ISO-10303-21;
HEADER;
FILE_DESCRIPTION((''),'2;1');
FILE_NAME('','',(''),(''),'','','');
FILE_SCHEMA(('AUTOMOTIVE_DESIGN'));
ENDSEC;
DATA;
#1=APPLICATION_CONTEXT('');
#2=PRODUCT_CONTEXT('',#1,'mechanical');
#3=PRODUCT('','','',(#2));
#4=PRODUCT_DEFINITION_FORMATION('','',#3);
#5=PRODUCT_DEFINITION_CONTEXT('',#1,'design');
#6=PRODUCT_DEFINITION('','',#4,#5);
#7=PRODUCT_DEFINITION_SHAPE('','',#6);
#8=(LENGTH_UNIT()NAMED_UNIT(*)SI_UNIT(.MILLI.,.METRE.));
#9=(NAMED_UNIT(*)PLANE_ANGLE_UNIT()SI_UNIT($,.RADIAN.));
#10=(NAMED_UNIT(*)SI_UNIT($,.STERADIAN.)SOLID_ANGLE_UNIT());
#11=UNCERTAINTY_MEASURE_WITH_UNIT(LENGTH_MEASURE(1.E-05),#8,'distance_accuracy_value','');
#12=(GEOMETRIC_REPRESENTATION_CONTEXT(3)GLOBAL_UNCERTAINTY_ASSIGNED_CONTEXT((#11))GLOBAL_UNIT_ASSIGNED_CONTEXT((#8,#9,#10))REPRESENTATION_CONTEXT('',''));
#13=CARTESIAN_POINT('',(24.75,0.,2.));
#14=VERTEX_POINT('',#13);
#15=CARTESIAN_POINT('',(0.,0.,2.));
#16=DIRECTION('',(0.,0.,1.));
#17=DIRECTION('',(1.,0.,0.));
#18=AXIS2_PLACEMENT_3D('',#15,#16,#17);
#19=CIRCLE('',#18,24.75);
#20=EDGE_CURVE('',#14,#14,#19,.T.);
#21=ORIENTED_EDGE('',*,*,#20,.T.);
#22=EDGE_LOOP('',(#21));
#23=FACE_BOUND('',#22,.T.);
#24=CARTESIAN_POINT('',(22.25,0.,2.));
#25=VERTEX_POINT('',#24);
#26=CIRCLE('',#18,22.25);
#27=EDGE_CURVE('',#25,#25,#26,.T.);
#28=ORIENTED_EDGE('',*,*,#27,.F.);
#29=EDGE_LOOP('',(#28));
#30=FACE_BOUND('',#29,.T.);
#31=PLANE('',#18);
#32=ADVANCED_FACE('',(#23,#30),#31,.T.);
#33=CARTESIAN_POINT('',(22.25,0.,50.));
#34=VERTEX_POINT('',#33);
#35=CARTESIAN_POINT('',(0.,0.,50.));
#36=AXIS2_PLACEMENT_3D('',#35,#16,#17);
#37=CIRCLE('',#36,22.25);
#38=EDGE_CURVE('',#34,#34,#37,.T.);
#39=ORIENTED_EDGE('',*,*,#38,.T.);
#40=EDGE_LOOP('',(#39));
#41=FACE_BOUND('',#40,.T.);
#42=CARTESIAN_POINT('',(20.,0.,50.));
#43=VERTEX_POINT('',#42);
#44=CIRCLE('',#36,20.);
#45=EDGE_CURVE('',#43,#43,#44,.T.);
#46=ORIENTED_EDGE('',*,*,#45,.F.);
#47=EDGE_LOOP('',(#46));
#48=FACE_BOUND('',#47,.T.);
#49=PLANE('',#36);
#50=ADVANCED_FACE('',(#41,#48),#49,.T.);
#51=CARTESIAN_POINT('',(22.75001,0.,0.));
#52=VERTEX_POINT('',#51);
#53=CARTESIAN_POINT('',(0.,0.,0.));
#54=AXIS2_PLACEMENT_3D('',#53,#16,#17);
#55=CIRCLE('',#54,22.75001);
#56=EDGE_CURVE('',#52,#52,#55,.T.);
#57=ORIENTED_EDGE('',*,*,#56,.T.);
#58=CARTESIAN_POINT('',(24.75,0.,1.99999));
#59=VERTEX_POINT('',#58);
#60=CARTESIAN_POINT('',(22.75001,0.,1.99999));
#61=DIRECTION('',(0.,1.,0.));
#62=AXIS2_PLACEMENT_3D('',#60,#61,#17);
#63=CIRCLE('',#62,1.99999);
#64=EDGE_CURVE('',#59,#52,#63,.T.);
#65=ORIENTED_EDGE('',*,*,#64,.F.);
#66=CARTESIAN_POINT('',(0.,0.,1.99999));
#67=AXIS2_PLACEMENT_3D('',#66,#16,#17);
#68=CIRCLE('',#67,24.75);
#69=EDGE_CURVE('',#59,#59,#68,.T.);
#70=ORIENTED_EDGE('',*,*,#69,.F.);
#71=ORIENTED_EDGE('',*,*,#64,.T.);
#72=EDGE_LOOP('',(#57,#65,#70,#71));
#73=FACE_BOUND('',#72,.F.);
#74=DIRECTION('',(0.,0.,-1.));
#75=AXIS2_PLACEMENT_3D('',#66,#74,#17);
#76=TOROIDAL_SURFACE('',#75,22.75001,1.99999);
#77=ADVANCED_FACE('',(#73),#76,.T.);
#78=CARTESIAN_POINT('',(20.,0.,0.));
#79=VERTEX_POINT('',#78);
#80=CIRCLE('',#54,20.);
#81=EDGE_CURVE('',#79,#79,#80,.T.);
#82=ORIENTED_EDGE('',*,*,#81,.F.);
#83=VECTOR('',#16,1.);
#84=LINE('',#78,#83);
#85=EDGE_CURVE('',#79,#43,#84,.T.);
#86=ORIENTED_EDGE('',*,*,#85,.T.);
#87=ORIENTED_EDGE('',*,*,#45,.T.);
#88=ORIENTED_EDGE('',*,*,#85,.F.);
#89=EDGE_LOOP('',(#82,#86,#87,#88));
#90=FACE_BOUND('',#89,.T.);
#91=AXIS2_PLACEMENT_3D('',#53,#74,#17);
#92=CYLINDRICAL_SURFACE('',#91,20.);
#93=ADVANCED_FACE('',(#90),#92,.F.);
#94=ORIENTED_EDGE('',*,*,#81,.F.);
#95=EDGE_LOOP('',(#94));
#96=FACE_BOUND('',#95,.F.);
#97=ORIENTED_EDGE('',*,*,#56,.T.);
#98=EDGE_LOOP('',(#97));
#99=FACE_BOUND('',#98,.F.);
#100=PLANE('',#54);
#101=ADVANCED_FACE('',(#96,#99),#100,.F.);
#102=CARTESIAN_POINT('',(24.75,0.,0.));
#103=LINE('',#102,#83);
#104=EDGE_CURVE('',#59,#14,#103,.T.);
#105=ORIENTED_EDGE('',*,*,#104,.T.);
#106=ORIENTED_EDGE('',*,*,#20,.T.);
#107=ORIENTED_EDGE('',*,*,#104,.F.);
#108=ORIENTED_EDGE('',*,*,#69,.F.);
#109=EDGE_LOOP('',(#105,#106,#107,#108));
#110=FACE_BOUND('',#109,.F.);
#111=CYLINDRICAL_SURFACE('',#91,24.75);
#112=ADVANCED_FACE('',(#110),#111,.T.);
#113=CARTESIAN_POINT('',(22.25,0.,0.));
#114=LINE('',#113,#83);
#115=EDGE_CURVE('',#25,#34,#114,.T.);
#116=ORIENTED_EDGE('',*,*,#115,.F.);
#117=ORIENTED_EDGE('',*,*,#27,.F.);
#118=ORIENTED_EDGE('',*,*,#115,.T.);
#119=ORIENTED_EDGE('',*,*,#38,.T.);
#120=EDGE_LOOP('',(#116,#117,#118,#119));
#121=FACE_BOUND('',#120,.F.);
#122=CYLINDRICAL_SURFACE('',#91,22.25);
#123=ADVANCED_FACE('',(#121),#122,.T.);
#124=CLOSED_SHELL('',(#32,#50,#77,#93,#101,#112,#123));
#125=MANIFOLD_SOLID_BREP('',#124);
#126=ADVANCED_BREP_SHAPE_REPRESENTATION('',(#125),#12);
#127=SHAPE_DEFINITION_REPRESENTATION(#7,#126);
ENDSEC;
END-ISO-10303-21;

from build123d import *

# Parameters (mm, degrees)
F0_R     = 22.25
F0_R_2   = 20
F1_DEPTH = 50
F0_R_3   = 24.75
F2_DEPTH = 2
F3_R     = 1.99999


# Not quite as in the source:
# - a fillet or chamfer is up to 0.001 mm smaller than in the source, because OpenCascade refuses the exact size


with BuildPart() as f1:
    # F0 (on Top) → F1 (new body)
    with BuildSketch(Plane.XY):
        Circle(F0_R)
        Circle(F0_R_2, mode=Mode.SUBTRACT)
    extrude(amount=F1_DEPTH)

    # F0 (on Top) → F2 (join)
    with BuildSketch(Plane.XY):
        Circle(F0_R_3)
        Circle(F0_R, mode=Mode.SUBTRACT)
    extrude(amount=F2_DEPTH)

    # F3 (radius 2 in the source; OpenCascade refuses exactly that, so slightly less here)
    f3_edges = [f1.edges().sort_by_distance(p)[0] for p in [
        (-24.75, 0, 0),
    ]]
    fillet(f3_edges, radius=F3_R)


solid = f1.part
